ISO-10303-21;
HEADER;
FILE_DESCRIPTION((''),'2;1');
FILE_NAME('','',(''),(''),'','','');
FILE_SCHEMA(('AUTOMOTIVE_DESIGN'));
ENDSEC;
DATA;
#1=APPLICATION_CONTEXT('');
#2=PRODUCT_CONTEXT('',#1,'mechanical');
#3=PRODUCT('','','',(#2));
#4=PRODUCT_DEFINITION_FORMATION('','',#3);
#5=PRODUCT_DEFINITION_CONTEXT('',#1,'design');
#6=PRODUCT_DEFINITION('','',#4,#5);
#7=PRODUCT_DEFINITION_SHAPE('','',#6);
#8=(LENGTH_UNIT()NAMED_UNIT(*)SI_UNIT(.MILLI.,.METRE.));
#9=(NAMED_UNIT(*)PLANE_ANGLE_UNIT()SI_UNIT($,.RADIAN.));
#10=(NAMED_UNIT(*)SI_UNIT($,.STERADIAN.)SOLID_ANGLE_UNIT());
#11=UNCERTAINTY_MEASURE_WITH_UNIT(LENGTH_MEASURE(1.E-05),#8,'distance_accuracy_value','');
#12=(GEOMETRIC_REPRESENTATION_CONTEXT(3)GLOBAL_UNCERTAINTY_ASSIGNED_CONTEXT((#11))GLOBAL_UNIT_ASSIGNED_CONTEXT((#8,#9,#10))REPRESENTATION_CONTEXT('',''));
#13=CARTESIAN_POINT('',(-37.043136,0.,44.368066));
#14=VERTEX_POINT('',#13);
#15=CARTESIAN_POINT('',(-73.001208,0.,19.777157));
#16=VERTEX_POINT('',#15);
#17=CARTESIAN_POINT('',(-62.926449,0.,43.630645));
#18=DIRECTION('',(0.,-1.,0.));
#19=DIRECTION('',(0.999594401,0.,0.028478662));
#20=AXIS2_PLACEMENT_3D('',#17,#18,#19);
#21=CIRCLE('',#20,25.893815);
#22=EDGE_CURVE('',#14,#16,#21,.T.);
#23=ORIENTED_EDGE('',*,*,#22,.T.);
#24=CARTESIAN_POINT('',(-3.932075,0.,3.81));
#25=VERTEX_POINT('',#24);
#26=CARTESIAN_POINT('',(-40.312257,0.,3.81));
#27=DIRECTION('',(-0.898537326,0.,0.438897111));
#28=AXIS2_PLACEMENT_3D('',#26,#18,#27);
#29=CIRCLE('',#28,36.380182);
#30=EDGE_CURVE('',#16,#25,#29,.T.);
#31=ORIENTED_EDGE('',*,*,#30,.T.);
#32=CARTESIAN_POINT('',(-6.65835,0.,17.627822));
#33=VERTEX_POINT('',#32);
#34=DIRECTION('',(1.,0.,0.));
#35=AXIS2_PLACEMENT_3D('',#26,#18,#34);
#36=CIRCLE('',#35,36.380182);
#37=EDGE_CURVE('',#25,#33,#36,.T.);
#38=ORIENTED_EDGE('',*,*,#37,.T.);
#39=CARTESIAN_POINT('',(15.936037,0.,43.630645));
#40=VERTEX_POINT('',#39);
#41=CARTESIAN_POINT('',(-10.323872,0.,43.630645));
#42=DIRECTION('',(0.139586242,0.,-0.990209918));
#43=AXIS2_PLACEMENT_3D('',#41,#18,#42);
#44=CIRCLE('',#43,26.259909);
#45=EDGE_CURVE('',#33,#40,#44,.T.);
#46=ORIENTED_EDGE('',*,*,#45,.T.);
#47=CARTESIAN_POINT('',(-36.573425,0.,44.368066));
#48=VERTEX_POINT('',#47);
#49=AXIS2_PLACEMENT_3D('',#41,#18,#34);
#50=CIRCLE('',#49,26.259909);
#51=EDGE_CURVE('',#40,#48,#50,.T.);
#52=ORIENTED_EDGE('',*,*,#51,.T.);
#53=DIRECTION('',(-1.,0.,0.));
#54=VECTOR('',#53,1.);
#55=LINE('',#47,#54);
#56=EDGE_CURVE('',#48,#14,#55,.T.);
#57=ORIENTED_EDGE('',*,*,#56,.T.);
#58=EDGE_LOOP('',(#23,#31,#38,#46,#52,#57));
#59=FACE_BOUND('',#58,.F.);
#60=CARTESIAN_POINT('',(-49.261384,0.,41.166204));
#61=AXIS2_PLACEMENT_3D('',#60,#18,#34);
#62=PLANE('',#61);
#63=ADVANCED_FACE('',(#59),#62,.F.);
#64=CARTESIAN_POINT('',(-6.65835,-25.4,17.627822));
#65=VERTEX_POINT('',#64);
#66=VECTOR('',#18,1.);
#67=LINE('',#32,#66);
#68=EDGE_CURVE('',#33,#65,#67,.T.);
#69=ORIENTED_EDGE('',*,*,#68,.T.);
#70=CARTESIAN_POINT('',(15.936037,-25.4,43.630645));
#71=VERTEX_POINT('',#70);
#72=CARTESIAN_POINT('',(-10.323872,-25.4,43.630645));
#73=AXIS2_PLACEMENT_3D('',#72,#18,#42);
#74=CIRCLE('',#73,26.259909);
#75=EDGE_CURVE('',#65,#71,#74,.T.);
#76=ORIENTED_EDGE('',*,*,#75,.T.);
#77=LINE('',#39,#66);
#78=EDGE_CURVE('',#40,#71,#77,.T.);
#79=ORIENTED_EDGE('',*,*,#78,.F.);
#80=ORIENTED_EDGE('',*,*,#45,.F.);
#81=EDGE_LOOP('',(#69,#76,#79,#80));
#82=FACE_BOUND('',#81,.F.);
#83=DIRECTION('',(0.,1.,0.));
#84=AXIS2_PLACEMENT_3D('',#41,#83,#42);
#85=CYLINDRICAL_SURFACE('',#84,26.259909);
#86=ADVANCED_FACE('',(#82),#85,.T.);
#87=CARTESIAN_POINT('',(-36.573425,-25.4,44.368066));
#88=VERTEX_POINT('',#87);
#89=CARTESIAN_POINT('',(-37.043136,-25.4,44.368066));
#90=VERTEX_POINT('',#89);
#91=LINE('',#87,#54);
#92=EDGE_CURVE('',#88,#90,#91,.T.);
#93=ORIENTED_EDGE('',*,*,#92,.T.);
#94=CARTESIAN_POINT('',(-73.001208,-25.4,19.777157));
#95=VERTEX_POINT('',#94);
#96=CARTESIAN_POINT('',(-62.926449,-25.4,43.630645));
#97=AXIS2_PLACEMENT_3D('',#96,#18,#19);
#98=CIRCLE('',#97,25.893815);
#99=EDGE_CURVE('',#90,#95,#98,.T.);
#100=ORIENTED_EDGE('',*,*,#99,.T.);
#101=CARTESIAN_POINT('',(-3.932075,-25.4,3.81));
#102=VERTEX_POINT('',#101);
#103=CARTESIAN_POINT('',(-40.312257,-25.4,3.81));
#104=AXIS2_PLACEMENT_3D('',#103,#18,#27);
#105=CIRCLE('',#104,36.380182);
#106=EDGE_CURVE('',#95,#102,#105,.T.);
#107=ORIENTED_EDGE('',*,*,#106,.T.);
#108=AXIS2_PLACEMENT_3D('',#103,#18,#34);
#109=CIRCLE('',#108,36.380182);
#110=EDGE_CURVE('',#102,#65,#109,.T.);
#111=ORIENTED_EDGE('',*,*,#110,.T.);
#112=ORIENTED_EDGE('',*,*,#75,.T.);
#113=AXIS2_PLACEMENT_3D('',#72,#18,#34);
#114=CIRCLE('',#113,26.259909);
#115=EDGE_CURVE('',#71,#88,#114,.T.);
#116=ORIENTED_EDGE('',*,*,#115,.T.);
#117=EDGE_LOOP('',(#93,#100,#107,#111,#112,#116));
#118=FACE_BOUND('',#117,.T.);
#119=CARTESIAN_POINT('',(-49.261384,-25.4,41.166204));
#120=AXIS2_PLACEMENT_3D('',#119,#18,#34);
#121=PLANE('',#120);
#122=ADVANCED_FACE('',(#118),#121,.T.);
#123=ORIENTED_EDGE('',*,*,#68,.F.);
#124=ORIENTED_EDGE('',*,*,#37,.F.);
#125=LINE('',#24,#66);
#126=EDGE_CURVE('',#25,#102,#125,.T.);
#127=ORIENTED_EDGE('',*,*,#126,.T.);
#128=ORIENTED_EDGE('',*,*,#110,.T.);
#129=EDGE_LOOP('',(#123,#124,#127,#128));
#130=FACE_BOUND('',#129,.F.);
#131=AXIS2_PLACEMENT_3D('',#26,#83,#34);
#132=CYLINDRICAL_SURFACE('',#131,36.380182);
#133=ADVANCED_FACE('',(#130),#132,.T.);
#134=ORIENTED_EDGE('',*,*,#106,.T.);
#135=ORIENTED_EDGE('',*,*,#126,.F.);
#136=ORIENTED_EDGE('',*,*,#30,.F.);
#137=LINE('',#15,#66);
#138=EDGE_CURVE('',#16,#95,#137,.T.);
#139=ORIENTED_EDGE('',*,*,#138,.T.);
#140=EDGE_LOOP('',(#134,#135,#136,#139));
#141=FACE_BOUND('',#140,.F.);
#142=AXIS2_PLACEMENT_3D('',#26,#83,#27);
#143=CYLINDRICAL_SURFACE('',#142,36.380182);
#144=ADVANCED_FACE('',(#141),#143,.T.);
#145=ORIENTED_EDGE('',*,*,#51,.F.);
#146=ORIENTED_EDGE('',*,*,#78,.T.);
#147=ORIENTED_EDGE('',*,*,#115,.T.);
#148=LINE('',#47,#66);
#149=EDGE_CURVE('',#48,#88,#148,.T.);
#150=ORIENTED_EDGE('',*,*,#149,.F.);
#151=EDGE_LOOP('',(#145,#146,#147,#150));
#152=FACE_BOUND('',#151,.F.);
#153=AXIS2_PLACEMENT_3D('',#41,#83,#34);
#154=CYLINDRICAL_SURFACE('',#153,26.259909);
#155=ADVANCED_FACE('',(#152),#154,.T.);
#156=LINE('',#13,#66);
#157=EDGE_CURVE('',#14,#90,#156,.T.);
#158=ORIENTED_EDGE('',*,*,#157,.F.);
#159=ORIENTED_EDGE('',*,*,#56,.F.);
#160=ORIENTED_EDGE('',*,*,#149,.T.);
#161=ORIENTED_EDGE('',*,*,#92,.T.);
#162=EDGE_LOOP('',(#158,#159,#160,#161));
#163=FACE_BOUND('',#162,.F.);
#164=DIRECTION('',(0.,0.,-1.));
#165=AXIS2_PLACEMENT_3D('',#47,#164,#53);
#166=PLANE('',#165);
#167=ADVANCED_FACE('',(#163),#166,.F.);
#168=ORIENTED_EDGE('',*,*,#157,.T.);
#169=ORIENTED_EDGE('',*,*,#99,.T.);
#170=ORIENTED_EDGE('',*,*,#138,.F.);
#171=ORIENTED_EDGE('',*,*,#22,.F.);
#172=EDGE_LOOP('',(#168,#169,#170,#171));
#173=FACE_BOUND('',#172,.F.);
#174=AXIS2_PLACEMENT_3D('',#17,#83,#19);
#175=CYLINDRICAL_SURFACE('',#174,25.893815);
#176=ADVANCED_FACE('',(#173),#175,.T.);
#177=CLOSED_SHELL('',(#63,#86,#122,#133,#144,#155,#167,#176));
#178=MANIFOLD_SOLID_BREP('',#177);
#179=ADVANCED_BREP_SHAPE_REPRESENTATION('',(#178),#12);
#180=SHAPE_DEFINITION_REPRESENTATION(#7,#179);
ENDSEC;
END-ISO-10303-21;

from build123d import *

# Parameters (mm, degrees)
F1_DEPTH = 25.4


with BuildPart() as f1:
    # F0 (on Front) → F1 (new body)
    with BuildSketch(Plane.XZ):
        with BuildLine():
            ThreePointArc((-37.2795093382, 40.0635529992), (-37.0944265378, 41.8428324334), (-37.0326339638, 43.6306446791))
            ThreePointArc((-37.0326339638, 43.6306446791), (-37.0352597257, 43.9993926792), (-37.0431364787, 44.3680658937))
            Line((-37.0431364787, 44.3680658937), (-59.2393539846, 44.3680658937))
            Line((-59.2393539846, 44.3680658937), (-59.2393539846, 34.8789981649))
            ThreePointArc((-59.2393539846, 34.8789981649), (-48.6715325086, 39.2167813917), (-37.2795093382, 40.0635529992))
        make_face()
        with BuildLine():
            ThreePointArc((-37.0431364787, 44.3680658937), (-37.0352597257, 43.9993926792), (-37.0326339638, 43.6306446791))
            ThreePointArc((-37.0326339638, 43.6306446791), (-37.0944265378, 41.8428324334), (-37.2795093382, 40.0635529992))
            ThreePointArc((-37.2795093382, 40.0635529992), (-36.8032339812, 40.0205567646), (-36.3275649384, 39.9713038099))
            ThreePointArc((-36.3275649384, 39.9713038099), (-36.5428213794, 42.1645221032), (-36.573424985, 44.3680658936))
            Line((-36.573424985, 44.3680658937), (-37.0431364787, 44.3680658937))
        make_face()
        with BuildLine():
            Line((-59.2393539846, 44.3680658937), (-37.0431364787, 44.3680658937))
            ThreePointArc((-37.0431364787, 44.3680658937), (-77.5434180545, 65.0043168763), (-73.0012082171, 19.7771569817))
            ThreePointArc((-73.0012082171, 19.7771569817), (-67.2022274173, 28.3140227514), (-59.2393539846, 34.8789981649))
            Line((-59.2393539846, 34.8789981649), (-59.2393539846, 44.3680658937))
        make_face()
        with BuildLine():
            ThreePointArc((-36.3275649384, 39.9713038099), (-36.8032339812, 40.0205567646), (-37.2795093382, 40.0635529992))
            ThreePointArc((-37.2795093382, 40.0635529992), (-44.4588292576, 25.4802541483), (-58.915556877, 18.0493547131))
            Line((-58.915556877, 18.0493547131), (-16.2551814161, 18.0493547131))
            ThreePointArc((-16.2551814161, 18.0493547131), (-29.6914752573, 25.897095458), (-36.3275649384, 39.9713038099))
        make_face()
        with BuildLine():
            ThreePointArc((-58.915556877, 18.0493547131), (-44.4588292576, 25.4802541483), (-37.2795093382, 40.0635529992))
            ThreePointArc((-37.2795093382, 40.0635529992), (-48.6715325086, 39.2167813917), (-59.2393539846, 34.8789981649))
            Line((-59.2393539846, 34.8789981649), (-59.2393539846, 18.0493547131))
            Line((-59.2393539846, 18.0493547131), (-58.915556877, 18.0493547131))
        make_face()
        with BuildLine():
            ThreePointArc((-59.2393539846, 34.8789981649), (-67.2022274173, 28.3140227514), (-73.0012082171, 19.7771569817))
            ThreePointArc((-73.0012082171, 19.7771569817), (-66.0790584232, 17.9294636931), (-58.915556877, 18.0493547131))
            Line((-58.915556877, 18.0493547131), (-59.2393539846, 18.0493547131))
            Line((-59.2393539846, 18.0493547131), (-59.2393539846, 34.8789981649))
        make_face()
        with BuildLine():
            ThreePointArc((-58.915556877, 18.0493547131), (-66.0790584232, 17.9294636931), (-73.0012082171, 19.7771569817))
            ThreePointArc((-73.0012082171, 19.7771569817), (-48.5063899421, -31.6353638875), (-3.9320745419, 3.8100001402))
            ThreePointArc((-3.9320745419, 3.8100001402), (-4.620150317, 10.8521017976), (-6.6583498303, 17.6278221851))
            ThreePointArc((-6.6583498303, 17.6278221851), (-11.4762045796, 17.3960309275), (-16.2551814161, 18.0493547131))
            Line((-16.2551814161, 18.0493547131), (-58.915556877, 18.0493547131))
        make_face()
        with BuildLine():
            Line((-16.2551814161, 44.3680658937), (-36.573424985, 44.3680658937))
            ThreePointArc((-36.573424985, 44.3680658936), (-36.5428213794, 42.1645221032), (-36.3275649384, 39.9713038099))
            ThreePointArc((-36.3275649384, 39.9713038099), (-25.6065541108, 37.085516119), (-16.2551814161, 31.1005622773))
            Line((-16.2551814161, 31.1005622773), (-16.2551814161, 44.3680658937))
        make_face()
        with BuildLine():
            ThreePointArc((15.9360373073, 43.6306446791), (-9.9551248939, 69.8879647074), (-36.573424985, 44.3680658936))
            Line((-36.573424985, 44.3680658937), (-16.2551814161, 44.3680658937))
            Line((-16.2551814161, 44.3680658937), (-16.2551814161, 31.1005622773))
            ThreePointArc((-16.2551814161, 31.1005622773), (-10.6808873976, 24.916861741), (-6.6583498303, 17.6278221851))
            ThreePointArc((-6.6583498303, 17.6278221851), (9.4983266183, 26.4067288367), (15.9360373073, 43.6306446791))
        make_face()
        with BuildLine():
            ThreePointArc((-16.2551814161, 31.1005622773), (-25.6065541108, 37.085516119), (-36.3275649384, 39.9713038099))
            ThreePointArc((-36.3275649384, 39.9713038099), (-29.6914752573, 25.897095458), (-16.2551814161, 18.0493547131))
            Line((-16.2551814161, 18.0493547131), (-16.2551814161, 31.1005622773))
        make_face()
        with BuildLine():
            Line((-16.2551814161, 31.1005622773), (-16.2551814161, 18.0493547131))
            ThreePointArc((-16.2551814161, 18.0493547131), (-11.4762045796, 17.3960309275), (-6.6583498303, 17.6278221851))
            ThreePointArc((-6.6583498303, 17.6278221851), (-10.6808873976, 24.916861741), (-16.2551814161, 31.1005622773))
        make_face()
    extrude(amount=F1_DEPTH)


solid = f1.part
